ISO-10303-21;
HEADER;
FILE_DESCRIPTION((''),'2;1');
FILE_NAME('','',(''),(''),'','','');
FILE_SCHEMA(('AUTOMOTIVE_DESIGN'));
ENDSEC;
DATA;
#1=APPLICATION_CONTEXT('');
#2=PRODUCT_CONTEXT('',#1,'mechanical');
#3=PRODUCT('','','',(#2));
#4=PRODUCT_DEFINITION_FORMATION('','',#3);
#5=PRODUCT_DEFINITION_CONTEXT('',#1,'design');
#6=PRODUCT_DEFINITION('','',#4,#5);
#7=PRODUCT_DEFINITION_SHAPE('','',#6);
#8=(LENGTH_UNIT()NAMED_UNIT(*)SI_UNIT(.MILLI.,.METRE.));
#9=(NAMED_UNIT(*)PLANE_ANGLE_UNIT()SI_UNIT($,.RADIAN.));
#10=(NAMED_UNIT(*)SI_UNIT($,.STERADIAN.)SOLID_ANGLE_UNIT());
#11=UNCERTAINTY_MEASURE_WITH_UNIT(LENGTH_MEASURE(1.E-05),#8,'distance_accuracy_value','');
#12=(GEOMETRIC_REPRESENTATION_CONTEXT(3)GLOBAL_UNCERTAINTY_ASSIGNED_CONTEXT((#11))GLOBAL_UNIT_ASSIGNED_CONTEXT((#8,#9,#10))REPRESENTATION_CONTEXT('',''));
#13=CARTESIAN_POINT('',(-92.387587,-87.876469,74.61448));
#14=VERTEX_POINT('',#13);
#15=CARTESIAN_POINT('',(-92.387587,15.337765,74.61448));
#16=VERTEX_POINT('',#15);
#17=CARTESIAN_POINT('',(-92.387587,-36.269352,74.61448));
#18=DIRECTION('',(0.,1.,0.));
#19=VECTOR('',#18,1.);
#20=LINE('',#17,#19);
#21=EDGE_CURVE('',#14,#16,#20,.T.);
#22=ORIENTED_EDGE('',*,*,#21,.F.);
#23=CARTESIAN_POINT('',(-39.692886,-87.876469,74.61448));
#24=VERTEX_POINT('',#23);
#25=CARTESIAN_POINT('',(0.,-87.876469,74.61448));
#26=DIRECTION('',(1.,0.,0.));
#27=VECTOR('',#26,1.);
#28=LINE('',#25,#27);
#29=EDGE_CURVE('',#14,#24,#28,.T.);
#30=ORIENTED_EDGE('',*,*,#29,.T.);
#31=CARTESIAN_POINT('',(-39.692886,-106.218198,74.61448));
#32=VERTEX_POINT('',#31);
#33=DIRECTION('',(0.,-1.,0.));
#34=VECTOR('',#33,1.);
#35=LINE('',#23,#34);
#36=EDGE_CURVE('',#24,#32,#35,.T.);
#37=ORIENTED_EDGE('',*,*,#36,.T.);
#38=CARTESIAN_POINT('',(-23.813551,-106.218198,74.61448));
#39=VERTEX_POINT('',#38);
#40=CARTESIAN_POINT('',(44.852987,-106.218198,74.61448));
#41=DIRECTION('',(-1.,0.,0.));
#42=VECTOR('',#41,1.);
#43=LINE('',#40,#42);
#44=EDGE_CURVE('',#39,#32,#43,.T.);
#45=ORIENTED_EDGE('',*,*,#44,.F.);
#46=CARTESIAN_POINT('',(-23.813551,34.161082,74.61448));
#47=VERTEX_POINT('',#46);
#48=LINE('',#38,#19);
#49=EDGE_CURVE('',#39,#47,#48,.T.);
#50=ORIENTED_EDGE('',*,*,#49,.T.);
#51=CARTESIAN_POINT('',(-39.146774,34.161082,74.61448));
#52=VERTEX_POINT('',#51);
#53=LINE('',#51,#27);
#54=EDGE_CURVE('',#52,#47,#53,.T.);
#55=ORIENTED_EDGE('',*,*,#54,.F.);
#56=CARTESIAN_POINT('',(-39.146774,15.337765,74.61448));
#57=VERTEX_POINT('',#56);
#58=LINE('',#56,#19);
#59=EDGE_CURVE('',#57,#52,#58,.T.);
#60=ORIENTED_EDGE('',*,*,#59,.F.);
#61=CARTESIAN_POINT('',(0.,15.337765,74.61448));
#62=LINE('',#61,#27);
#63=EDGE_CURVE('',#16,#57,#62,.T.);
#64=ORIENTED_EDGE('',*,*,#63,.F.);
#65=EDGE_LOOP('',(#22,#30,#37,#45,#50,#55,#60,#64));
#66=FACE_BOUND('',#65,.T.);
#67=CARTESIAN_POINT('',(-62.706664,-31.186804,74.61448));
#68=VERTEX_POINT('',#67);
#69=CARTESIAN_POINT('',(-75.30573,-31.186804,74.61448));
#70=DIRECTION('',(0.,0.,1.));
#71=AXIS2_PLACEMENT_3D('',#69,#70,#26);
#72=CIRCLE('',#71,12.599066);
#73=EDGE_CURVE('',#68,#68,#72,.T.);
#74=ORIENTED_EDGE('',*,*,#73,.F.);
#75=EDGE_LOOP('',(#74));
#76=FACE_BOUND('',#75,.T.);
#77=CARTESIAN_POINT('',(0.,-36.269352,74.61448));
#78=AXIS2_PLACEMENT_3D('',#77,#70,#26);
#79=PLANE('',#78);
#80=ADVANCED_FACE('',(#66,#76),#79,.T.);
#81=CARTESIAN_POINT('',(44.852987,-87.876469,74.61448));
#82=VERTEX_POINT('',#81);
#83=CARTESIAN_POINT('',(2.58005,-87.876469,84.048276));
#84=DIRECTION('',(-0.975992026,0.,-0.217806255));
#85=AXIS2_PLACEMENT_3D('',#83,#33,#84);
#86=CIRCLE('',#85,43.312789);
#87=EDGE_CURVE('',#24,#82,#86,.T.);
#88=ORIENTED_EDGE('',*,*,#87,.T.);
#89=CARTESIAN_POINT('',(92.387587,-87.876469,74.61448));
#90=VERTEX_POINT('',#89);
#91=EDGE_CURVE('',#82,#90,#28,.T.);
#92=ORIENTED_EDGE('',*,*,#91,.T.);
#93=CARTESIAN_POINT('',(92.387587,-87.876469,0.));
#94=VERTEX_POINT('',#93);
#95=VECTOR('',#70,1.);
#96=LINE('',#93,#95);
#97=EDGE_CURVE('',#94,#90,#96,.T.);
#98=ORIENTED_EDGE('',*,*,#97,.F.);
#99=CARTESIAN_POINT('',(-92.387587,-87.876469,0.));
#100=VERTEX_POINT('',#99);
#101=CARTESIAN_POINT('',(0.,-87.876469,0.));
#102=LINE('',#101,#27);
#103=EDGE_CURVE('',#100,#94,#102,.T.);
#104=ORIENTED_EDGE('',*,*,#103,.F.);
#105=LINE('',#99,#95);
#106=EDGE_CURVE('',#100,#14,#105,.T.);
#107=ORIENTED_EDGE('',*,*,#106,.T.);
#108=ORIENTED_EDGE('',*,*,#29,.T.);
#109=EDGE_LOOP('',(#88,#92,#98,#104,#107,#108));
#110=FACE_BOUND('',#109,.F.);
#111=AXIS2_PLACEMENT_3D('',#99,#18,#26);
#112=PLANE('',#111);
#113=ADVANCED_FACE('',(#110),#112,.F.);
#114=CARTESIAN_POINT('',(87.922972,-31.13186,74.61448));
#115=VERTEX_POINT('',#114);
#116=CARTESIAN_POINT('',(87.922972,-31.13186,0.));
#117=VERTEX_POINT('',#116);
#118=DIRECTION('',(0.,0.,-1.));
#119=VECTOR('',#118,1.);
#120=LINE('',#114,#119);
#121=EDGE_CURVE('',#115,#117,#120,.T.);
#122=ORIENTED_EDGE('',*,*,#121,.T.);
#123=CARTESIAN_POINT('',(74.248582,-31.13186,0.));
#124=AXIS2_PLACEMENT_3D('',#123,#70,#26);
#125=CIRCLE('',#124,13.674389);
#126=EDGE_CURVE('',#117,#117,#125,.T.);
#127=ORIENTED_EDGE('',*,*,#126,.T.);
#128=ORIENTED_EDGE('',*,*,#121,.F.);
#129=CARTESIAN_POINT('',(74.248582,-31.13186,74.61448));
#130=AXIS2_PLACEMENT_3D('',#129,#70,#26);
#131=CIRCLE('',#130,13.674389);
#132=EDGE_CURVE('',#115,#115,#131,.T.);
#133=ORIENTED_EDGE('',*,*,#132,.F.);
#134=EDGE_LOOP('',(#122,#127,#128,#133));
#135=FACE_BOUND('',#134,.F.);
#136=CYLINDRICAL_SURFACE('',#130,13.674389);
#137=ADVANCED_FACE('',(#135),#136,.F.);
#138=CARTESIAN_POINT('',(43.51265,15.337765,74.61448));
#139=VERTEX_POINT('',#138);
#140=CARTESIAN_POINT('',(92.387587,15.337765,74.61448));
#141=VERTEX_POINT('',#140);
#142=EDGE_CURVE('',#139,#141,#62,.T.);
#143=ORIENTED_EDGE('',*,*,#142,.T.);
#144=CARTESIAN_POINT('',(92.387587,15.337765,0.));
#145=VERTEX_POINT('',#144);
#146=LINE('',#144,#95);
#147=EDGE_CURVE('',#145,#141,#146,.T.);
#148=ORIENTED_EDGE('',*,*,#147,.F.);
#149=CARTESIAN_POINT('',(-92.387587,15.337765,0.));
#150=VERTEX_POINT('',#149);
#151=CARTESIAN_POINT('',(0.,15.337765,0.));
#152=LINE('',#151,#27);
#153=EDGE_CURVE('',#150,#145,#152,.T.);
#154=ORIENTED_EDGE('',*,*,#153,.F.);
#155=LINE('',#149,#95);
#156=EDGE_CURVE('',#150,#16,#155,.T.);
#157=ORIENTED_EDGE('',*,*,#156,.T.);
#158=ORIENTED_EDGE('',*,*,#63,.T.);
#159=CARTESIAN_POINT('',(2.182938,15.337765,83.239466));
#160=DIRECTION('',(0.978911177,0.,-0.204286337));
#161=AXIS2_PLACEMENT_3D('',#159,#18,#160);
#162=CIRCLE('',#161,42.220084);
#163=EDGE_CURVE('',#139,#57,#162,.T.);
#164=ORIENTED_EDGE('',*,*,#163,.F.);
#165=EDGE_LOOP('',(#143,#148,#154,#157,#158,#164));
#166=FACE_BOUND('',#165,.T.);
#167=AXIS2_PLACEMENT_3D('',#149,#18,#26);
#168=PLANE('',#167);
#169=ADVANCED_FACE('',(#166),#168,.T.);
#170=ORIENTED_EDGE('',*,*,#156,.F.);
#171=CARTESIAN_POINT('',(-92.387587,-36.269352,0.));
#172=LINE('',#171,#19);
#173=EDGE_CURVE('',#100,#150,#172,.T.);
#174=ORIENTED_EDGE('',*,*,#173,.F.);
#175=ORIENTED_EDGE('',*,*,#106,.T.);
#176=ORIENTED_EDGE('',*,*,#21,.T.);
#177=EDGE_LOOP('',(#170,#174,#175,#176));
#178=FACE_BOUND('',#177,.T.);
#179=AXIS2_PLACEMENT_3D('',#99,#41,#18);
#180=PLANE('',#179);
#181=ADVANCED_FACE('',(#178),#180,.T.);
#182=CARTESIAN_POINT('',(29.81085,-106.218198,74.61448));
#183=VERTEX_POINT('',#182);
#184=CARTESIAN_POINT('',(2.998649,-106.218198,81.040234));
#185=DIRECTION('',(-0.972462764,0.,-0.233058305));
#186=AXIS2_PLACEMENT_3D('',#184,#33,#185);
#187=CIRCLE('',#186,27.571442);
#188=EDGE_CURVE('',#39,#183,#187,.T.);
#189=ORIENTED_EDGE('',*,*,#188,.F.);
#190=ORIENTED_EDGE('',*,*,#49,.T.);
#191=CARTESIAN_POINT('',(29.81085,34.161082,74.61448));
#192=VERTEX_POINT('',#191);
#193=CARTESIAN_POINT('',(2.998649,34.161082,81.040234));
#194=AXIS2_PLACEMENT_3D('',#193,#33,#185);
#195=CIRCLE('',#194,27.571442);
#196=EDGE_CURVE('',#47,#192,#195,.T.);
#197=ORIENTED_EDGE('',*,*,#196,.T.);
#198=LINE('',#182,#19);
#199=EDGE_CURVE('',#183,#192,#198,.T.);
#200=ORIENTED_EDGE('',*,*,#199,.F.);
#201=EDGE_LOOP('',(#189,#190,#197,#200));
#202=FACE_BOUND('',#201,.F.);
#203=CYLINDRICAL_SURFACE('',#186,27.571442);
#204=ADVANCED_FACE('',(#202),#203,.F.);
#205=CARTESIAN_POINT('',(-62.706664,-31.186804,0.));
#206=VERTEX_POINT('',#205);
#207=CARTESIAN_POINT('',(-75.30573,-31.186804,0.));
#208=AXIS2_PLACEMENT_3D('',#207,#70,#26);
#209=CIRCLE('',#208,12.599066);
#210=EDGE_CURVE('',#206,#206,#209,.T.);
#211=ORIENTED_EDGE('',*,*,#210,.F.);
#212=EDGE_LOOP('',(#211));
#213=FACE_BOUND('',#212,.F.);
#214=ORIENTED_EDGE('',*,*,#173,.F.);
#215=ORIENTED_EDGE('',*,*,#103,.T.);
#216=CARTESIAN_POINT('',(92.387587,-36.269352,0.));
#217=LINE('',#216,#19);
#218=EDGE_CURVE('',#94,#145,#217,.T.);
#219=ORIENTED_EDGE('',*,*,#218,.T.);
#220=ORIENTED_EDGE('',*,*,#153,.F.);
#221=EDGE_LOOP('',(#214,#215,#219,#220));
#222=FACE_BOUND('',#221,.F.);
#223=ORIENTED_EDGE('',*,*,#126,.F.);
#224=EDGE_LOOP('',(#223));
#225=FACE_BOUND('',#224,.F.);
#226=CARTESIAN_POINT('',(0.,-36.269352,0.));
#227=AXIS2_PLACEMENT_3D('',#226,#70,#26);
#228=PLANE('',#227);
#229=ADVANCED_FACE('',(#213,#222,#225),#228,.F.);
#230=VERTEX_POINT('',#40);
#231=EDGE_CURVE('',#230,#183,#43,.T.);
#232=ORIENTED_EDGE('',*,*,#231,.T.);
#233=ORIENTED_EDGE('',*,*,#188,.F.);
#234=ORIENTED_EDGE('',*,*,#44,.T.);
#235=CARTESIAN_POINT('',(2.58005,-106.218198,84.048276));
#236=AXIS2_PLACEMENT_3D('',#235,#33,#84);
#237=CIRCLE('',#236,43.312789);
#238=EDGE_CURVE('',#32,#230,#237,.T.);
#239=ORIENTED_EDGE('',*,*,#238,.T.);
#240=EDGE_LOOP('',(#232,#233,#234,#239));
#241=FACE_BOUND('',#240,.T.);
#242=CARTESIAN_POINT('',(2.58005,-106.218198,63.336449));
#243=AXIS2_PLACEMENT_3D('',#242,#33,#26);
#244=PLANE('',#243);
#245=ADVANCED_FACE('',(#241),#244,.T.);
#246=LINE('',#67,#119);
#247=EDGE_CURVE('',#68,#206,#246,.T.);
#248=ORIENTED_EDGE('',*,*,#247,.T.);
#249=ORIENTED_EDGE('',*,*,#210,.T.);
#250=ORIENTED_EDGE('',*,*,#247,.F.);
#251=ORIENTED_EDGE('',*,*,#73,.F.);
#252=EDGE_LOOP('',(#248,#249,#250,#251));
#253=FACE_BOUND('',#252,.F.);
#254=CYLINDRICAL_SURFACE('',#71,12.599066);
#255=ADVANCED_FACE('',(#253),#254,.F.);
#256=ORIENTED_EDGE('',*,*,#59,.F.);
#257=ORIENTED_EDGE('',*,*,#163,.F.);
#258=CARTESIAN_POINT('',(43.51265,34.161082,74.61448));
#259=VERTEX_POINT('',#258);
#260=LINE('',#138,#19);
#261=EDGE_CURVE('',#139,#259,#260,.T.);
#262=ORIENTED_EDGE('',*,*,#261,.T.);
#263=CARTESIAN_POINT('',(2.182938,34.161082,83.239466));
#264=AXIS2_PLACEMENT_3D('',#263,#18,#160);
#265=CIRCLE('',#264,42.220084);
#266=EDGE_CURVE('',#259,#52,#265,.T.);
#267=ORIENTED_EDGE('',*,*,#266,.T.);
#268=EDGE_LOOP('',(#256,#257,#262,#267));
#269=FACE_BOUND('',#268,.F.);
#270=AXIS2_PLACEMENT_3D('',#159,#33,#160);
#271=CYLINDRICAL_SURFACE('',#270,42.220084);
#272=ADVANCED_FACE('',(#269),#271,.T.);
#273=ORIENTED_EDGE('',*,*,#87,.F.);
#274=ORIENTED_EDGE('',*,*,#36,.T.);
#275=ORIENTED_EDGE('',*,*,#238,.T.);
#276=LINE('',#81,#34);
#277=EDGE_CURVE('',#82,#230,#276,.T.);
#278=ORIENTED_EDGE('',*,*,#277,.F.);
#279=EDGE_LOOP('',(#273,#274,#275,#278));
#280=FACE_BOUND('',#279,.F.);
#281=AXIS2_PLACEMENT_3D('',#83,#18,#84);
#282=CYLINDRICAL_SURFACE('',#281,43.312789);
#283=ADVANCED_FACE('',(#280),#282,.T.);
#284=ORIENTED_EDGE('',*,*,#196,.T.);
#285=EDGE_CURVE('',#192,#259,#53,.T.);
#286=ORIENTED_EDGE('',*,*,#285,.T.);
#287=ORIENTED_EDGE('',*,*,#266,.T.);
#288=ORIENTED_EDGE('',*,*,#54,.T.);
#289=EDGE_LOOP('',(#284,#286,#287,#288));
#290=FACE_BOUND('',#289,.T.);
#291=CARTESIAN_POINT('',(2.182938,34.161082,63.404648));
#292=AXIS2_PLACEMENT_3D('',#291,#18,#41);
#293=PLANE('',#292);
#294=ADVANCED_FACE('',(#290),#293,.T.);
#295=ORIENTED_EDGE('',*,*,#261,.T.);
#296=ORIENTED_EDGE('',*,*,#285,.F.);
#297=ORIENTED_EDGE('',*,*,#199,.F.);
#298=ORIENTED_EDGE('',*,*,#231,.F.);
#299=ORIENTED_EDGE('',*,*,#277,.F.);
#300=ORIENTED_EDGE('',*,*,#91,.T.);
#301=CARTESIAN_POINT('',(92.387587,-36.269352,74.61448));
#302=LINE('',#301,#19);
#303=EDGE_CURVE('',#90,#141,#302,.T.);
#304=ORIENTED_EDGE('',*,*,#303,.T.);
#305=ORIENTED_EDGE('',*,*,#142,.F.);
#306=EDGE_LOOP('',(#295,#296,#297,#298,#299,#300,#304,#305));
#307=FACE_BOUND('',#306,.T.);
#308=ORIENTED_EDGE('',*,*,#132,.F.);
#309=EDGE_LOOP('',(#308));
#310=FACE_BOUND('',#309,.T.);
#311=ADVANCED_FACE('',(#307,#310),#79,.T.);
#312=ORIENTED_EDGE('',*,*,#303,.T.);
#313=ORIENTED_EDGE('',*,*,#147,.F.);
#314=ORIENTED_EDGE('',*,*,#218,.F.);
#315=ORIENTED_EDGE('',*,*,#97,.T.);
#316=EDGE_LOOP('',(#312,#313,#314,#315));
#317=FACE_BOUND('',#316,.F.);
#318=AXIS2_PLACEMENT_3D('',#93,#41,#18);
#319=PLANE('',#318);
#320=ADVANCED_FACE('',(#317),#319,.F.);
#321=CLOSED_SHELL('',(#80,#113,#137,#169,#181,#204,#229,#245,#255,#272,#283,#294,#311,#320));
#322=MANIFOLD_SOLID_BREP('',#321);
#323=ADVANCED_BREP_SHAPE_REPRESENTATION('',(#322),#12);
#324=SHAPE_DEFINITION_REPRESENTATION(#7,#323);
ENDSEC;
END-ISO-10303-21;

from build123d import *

# Parameters (mm, degrees)
F0_W      = 184.7751736641
F0_H      = 103.2142341137
F1_DEPTH  = 74.6144801378
F3_DEPTH  = 18.3417294174
F5_DEPTH  = 18.8233163208
F7_DEPTH  = 140.3802798519
F8_R      = 12.5990656268
F9_DEPTH  = 74.6154801378
F10_R     = 13.6743893785
F11_DEPTH = 74.6154801378


with BuildPart() as f1:
    # F0 (on Top) → F1 (new body)
    with BuildSketch(Plane.XY):
        with Locations((0, -36.26935184)):
            Rectangle(F0_W, F0_H)
    extrude(amount=F1_DEPTH)

    # F2 (on face) → F3 (join)
    with BuildSketch(Plane.XZ.offset(87.8764688969)):
        with BuildLine():
            Line((44.8529869318, 74.6144801378), (-39.6928861737, 74.6144801378))
            ThreePointArc((-39.6928861737, 74.6144801378), (2.580050379, 40.7354876043), (44.8529869318, 74.6144801378))
        make_face()
    extrude(amount=F3_DEPTH)

    # F4 (on face) → F5 (join)
    with BuildSketch(Plane(origin=(0, 15.3377652168, 0), x_dir=(-1, 0, 0), z_dir=(0, 1, 0))):
        with BuildLine():
            Line((39.1467735171, 74.6144801378), (-43.5126498342, 74.6144801378))
            ThreePointArc((-43.5126498342, 74.6144801378), (-2.1829381585, 41.0193828263), (39.1467735171, 74.6144801378))
        make_face()
    extrude(amount=F5_DEPTH)

    # F6 (on face) → F7 (cut, through all)
    with BuildSketch(Plane.XZ.offset(106.2181983143)):
        with BuildLine():
            Line((29.8108495772, 74.6144801378), (-23.8135512918, 74.6144801378))
            ThreePointArc((-23.8135512918, 74.6144801378), (2.9986491427, 53.4687918706), (29.8108495772, 74.6144801378))
        make_face()
    extrude(amount=-F7_DEPTH, mode=Mode.SUBTRACT)

    # F8 (on face) → F9 (cut, through all)
    with BuildSketch(Plane.XY.offset(74.6144801378)):
        with Locations((-75.3057301044, -31.1868041754)):
            Circle(F8_R)
    extrude(amount=-F9_DEPTH, mode=Mode.SUBTRACT)

    # F10 (on face) → F11 (cut, through all)
    with BuildSketch(Plane.XY.offset(74.6144801378)):
        with Locations((74.2485821247, -31.1318598688)):
            Circle(F10_R)
    extrude(amount=-F11_DEPTH, mode=Mode.SUBTRACT)


solid = f1.part
